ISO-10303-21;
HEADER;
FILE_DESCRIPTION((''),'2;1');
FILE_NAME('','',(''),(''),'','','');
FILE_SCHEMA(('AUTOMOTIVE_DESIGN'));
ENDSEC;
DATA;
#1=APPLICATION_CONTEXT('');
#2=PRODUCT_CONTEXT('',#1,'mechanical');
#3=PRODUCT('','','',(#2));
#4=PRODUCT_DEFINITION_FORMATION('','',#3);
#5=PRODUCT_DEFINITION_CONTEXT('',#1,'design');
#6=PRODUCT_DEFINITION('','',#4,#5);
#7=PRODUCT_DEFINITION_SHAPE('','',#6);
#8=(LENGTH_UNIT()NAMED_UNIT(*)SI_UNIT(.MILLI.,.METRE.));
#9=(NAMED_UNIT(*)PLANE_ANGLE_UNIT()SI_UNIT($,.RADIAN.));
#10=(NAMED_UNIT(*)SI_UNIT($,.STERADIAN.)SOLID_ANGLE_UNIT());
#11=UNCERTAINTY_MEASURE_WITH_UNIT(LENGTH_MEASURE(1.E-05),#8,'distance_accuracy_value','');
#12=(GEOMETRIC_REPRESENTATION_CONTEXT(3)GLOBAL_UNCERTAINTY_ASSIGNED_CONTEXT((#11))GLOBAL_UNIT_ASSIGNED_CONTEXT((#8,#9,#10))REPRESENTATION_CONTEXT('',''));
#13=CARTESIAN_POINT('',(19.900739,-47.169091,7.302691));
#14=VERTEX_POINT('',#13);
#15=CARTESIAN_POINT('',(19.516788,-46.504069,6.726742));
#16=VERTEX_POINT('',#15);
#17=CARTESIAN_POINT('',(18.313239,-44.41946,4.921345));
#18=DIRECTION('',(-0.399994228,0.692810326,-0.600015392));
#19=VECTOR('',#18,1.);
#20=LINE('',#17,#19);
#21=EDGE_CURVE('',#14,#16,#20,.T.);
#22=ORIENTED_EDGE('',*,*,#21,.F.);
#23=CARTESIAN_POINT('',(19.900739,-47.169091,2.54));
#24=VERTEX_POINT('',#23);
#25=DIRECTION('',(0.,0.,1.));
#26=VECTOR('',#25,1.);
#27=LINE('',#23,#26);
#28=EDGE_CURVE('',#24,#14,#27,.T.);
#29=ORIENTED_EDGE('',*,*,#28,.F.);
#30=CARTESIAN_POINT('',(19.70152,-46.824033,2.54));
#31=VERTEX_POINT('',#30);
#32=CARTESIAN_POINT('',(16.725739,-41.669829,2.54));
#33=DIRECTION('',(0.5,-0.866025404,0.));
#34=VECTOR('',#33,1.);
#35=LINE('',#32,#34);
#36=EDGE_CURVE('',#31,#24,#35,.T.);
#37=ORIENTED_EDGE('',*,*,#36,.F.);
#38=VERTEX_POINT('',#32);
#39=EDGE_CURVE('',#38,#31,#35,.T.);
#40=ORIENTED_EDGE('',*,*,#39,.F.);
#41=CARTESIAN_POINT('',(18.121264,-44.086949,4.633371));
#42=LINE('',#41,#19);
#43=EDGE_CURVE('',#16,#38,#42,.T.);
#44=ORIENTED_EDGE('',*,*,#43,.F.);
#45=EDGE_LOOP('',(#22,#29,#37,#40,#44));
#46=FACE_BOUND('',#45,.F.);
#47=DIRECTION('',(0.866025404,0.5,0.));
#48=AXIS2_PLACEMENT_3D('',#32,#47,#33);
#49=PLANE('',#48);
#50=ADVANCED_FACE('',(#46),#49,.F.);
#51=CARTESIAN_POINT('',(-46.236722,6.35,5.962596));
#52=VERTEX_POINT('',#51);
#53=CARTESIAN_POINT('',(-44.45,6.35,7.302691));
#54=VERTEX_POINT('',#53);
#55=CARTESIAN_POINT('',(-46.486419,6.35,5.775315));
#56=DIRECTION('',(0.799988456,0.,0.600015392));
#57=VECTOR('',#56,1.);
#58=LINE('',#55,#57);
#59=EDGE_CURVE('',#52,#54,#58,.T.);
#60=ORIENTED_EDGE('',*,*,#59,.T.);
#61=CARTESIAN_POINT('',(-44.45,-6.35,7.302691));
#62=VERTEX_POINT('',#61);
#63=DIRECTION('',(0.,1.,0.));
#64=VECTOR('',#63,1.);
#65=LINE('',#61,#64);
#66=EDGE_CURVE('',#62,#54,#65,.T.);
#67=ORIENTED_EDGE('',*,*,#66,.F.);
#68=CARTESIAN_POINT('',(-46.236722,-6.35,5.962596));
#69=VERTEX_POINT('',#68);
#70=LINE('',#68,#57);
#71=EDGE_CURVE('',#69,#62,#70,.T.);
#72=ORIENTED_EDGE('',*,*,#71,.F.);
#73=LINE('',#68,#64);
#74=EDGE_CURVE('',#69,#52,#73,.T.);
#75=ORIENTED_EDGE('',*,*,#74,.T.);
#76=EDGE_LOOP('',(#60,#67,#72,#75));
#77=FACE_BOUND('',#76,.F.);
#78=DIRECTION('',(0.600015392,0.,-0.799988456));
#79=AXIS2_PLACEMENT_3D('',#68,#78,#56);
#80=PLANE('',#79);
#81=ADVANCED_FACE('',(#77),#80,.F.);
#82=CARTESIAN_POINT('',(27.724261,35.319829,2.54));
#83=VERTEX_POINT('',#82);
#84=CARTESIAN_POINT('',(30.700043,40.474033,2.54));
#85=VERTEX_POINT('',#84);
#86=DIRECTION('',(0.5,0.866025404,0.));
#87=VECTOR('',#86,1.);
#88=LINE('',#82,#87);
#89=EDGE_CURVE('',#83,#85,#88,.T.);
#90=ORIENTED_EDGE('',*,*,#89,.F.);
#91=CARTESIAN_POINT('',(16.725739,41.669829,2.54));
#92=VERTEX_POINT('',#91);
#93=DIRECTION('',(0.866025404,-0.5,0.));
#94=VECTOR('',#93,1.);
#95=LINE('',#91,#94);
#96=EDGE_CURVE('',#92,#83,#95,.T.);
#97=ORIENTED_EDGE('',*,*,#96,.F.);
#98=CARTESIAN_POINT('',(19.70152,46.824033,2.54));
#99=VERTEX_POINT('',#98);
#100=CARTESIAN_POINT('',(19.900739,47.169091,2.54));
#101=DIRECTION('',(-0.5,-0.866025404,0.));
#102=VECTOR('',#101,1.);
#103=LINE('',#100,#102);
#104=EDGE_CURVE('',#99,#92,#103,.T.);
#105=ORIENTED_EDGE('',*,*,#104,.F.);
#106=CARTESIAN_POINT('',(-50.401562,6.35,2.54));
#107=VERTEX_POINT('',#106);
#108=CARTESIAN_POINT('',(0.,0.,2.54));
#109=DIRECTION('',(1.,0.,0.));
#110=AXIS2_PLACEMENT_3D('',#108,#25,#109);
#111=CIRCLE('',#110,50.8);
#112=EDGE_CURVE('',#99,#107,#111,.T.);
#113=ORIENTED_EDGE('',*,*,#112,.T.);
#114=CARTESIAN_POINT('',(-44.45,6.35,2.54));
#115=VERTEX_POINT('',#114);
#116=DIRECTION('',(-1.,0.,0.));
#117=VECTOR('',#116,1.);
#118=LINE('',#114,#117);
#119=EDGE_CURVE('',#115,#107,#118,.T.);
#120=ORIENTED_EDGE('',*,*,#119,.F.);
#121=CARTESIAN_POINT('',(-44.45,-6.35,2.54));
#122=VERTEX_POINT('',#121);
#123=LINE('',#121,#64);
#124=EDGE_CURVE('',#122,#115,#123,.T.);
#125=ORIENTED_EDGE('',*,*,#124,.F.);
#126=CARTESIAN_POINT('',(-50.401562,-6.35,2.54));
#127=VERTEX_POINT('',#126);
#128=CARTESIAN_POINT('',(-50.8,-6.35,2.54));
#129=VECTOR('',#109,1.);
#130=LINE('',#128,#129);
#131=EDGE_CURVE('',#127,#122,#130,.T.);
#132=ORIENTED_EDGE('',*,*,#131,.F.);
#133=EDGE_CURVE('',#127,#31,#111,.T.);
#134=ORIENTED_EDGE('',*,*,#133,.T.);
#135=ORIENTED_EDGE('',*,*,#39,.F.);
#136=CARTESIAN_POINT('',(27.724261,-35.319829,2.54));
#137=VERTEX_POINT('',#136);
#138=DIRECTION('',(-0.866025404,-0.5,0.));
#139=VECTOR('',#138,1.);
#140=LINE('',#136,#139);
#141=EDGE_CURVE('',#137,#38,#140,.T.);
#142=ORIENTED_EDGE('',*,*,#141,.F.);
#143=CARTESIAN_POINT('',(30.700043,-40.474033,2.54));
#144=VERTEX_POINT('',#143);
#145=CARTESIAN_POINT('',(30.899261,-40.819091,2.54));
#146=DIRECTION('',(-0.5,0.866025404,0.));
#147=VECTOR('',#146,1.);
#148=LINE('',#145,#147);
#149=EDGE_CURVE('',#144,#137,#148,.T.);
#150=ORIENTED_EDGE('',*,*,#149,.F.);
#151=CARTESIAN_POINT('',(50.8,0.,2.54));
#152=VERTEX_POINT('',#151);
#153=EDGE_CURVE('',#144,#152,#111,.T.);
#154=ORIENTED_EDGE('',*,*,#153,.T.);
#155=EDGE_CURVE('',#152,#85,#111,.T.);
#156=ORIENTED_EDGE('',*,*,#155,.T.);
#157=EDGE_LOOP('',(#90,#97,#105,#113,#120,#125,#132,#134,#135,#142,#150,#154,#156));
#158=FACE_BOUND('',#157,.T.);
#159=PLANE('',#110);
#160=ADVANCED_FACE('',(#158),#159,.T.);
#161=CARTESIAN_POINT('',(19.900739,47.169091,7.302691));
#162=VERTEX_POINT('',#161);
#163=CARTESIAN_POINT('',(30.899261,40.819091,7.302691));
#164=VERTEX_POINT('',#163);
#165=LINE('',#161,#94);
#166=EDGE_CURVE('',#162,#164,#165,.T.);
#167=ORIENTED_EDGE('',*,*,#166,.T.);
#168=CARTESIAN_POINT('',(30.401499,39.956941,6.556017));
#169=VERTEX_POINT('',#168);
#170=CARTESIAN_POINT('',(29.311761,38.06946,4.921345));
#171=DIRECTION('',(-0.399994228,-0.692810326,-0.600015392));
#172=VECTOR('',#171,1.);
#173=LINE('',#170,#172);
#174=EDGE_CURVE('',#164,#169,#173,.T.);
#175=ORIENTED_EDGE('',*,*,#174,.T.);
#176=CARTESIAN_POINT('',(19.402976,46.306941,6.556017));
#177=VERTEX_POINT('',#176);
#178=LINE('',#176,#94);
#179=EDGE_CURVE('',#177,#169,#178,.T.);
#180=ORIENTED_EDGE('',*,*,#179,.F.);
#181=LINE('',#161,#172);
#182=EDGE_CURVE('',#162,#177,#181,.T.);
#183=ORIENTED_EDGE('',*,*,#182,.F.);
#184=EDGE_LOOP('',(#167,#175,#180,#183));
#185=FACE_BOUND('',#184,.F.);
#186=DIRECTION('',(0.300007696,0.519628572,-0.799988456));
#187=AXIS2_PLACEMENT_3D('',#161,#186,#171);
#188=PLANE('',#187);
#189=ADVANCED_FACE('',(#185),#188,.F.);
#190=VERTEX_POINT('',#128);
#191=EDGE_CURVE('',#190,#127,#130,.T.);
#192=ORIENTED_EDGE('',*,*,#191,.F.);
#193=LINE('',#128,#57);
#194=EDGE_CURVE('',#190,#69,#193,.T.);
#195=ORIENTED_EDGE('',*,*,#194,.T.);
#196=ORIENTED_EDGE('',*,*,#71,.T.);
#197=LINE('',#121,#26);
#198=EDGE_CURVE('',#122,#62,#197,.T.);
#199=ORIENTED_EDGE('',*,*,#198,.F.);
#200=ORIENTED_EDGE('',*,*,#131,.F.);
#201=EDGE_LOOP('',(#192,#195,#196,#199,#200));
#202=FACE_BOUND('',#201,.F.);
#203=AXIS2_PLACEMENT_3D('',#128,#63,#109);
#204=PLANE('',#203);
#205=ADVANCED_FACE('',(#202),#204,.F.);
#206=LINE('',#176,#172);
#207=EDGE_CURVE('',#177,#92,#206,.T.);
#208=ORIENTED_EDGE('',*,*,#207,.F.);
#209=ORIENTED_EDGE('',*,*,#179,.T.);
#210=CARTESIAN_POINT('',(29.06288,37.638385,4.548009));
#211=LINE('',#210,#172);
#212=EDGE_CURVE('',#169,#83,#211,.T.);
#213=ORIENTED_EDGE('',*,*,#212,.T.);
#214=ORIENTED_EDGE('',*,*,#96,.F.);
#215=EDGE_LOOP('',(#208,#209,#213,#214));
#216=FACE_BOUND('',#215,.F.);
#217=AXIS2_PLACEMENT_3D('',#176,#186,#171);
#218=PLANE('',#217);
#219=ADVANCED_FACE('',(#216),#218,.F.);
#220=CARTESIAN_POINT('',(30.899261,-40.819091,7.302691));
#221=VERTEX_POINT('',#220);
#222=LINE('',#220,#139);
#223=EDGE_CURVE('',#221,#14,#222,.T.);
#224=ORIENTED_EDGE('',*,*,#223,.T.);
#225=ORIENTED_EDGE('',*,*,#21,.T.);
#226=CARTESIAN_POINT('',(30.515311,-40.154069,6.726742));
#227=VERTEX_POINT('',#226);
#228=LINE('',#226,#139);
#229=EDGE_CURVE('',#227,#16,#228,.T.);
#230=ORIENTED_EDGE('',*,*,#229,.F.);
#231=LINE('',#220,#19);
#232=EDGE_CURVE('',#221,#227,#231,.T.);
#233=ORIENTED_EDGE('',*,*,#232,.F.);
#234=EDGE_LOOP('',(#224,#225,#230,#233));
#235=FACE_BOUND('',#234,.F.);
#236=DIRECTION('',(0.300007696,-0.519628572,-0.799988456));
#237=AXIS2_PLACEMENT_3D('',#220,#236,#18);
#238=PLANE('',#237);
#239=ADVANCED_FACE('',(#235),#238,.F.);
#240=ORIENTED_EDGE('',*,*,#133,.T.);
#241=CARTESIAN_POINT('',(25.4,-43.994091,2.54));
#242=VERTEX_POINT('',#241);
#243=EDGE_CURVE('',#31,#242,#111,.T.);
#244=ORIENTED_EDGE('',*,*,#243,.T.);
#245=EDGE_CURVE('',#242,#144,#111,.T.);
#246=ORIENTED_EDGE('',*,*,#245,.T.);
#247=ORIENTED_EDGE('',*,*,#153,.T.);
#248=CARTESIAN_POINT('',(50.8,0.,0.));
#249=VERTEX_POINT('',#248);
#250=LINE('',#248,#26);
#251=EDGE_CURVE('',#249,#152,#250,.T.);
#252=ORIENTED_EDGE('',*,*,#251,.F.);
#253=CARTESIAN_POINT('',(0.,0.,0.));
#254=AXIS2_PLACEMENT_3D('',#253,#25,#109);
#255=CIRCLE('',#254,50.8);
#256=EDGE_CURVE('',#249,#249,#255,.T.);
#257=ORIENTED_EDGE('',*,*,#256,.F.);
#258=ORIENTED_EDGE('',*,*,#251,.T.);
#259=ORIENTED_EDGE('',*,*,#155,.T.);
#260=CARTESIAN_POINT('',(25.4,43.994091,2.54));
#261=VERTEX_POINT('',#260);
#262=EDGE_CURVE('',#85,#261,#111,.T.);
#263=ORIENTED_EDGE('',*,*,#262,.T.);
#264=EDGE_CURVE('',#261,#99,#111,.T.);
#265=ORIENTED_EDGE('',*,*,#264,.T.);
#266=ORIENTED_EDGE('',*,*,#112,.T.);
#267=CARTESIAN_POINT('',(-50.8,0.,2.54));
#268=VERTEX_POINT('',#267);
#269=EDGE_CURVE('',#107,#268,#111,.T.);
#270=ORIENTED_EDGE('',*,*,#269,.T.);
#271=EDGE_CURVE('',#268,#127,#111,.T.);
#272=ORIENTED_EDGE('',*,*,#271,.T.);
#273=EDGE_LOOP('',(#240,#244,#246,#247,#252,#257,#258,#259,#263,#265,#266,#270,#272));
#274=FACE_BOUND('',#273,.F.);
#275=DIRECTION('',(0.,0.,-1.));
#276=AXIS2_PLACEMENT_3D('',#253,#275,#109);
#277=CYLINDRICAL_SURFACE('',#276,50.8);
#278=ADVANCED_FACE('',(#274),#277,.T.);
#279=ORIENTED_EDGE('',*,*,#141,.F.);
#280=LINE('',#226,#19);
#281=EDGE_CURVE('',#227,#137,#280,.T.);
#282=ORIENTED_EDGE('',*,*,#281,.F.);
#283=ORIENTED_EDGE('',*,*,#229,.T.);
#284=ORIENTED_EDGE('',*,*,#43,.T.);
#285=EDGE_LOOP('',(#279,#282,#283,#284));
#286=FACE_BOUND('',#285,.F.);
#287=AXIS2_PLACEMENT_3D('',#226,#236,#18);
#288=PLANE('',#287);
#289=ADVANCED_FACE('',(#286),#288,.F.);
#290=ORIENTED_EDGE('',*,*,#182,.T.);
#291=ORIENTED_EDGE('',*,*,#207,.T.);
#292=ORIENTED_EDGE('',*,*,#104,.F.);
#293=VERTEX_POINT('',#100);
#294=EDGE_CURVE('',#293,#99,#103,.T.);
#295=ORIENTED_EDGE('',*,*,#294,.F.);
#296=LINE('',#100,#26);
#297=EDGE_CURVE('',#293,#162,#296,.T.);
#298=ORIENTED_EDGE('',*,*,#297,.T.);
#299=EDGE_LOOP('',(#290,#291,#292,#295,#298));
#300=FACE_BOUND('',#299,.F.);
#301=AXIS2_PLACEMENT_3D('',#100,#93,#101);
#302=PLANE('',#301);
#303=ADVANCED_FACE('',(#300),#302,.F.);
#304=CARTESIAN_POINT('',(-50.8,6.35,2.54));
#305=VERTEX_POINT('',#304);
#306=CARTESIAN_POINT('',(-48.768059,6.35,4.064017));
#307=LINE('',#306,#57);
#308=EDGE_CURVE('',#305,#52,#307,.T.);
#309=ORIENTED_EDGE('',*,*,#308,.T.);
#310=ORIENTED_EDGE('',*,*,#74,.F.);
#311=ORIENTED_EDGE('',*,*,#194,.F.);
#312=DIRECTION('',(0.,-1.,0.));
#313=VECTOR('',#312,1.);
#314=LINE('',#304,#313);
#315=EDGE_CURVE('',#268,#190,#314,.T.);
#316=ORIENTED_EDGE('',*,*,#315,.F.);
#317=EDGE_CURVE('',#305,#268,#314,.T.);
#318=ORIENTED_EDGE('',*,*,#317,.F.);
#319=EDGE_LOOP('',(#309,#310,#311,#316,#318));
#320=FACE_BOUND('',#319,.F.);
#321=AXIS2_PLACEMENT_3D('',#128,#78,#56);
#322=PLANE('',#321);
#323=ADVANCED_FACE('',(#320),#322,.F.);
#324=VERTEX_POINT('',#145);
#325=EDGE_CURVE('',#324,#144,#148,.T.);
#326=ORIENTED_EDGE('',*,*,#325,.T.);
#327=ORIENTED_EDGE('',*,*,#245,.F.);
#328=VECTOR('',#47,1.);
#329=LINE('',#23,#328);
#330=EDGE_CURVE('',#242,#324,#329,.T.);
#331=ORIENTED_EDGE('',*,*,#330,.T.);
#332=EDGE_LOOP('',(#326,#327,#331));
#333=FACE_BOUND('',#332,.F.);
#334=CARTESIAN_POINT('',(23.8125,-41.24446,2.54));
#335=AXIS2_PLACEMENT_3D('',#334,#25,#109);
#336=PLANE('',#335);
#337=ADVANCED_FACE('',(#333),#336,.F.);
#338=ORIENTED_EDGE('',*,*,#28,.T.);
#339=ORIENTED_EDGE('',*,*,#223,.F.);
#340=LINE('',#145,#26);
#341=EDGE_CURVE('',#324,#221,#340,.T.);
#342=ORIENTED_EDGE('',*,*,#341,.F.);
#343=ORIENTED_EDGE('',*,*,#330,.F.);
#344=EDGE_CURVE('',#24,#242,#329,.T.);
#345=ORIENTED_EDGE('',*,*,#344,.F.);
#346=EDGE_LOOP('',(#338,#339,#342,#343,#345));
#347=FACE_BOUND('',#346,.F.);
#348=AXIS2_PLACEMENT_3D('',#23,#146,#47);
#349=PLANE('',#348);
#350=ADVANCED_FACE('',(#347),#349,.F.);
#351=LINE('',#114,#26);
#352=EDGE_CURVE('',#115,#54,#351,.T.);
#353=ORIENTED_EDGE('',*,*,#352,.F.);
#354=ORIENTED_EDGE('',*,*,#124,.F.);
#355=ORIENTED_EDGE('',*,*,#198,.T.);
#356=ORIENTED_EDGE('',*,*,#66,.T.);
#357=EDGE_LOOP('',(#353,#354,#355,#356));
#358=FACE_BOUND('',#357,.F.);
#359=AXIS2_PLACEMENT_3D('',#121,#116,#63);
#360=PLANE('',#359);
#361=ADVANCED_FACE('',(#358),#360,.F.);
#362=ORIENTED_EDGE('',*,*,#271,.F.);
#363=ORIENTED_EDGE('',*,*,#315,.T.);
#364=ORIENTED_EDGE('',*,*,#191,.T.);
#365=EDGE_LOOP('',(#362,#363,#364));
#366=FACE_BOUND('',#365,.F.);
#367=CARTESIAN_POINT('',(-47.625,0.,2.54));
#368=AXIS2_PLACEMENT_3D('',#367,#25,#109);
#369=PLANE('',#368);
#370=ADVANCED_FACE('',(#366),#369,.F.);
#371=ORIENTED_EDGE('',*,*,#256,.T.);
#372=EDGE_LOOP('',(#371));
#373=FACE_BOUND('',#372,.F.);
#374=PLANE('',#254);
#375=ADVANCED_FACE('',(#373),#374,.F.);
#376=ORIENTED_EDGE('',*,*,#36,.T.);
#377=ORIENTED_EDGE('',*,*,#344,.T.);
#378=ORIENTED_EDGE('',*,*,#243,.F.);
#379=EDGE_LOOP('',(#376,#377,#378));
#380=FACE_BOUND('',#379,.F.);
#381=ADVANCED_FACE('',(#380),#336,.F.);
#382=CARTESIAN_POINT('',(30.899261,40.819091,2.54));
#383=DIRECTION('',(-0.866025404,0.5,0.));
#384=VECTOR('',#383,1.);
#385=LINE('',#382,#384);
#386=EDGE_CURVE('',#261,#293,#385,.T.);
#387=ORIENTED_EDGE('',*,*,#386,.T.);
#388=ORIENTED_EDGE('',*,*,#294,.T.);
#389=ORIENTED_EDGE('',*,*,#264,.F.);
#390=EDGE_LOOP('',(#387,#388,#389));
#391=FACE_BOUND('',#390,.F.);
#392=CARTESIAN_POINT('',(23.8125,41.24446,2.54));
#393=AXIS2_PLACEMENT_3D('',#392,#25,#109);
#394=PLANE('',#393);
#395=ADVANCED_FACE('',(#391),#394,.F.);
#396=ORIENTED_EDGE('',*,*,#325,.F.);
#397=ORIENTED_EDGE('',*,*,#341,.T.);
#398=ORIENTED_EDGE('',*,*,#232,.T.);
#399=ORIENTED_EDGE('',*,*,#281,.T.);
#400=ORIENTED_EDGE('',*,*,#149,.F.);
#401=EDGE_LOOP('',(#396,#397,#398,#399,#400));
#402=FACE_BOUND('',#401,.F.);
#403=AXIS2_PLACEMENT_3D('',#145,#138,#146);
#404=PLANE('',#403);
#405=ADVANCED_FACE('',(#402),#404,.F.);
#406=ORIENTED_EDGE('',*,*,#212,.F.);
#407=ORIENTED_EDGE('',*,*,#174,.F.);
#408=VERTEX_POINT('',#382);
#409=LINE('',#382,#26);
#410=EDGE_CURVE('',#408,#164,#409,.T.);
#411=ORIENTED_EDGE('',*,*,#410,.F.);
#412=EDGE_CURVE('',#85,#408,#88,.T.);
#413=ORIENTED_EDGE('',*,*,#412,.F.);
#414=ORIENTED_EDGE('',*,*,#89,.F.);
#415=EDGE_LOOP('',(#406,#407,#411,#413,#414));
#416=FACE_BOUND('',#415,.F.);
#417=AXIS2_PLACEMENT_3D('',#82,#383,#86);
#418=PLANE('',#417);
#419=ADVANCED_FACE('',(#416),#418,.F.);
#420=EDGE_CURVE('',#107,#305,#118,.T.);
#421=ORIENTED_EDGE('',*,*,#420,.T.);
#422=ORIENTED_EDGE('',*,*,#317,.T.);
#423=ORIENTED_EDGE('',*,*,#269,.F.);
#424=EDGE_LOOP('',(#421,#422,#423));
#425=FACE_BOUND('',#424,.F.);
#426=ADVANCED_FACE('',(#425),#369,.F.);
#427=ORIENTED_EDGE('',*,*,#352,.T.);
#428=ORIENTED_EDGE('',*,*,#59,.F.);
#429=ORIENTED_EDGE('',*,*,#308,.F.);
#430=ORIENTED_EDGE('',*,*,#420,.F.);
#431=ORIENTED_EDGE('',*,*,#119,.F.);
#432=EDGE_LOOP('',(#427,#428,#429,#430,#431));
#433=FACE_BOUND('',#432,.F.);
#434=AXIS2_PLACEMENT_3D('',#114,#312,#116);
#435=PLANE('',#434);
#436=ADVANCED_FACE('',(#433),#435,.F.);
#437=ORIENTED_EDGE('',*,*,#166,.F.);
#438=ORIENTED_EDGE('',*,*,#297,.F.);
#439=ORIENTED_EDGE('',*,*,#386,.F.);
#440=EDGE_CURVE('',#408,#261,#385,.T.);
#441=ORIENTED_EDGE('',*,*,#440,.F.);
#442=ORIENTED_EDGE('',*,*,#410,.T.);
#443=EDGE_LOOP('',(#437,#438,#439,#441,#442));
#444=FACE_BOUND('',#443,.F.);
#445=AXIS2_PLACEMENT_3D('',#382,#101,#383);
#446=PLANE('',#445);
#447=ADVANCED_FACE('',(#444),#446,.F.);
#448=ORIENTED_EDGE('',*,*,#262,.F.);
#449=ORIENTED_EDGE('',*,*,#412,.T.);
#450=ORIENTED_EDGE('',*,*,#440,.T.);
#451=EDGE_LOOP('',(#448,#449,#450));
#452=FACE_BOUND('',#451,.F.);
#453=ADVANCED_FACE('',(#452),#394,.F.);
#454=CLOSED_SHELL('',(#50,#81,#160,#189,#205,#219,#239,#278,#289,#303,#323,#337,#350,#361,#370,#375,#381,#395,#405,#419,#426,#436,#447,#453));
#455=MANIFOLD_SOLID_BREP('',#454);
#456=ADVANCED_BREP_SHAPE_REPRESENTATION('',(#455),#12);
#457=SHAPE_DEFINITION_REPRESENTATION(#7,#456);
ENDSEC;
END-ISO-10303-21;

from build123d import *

# Parameters (mm, degrees)
F0_R     = 50.8
F1_DEPTH = 2.54
F3_DEPTH = 12.7
F5_DEPTH = 25.4
F7_DEPTH = 25.4
F9_DEPTH = 25.4


# Not quite as in the source:
# - a feature names something its author has since deleted; it is built from what else it names


with BuildPart() as f1:
    # F0 (on Top) → F1 (new body)
    with BuildSketch(Plane.XY):
        Circle(F0_R)
    extrude(amount=F1_DEPTH)

    # F2 (on face) → F3 (join)
    with BuildSketch(Plane.XY.offset(2.54)):
        Polygon((-50.8, 6.35), (-50.8, 0), (-50.8, -6.35), (-44.45, -6.35), (-44.45, 6.35), align=None)
        Polygon((16.725738686, -41.6698291982), (19.900738686, -47.1690905122), (30.899261314, -40.8190905122), (27.724261314, -35.3198291982), align=None)
        Polygon((27.724261314, 35.3198291982), (30.899261314, 40.8190905122), (19.900738686, 47.1690905122), (16.725738686, 41.6698291982), align=None)
    extrude(amount=F3_DEPTH)

    # F4 (on face) → F5 (cut)
    with BuildSketch(Plane.XZ.offset(6.35)):
        Polygon((-50.8, 15.24), (-50.8, 2.54), (-46.2367217033, 5.962595906), (-44.45, 7.3026908967), (-44.45, 15.24), align=None)
    extrude(amount=-F5_DEPTH, mode=Mode.SUBTRACT)

    # F6 (on face) → F7 (cut)
    with BuildSketch(Plane(origin=(5.499261314, 3.175, 0), x_dir=(-0.5, 0.8660254038, 0), z_dir=(0.8660254038, 0.5, 0))):
        Polygon((-50.0320994455, 6.7267423959), (-44.45, 2.54), (-44.45, 15.24), (-50.8, 15.24), (-50.8, 7.3026908967), align=None)
    extrude(amount=-F7_DEPTH, mode=Mode.SUBTRACT)

    # F8 (on face) → F9 (cut)
    with BuildSketch(Plane(origin=(-5.499261314, 3.175, 0), x_dir=(-0.5, -0.8660254038, 0), z_dir=(-0.8660254038, 0.5, 0))):
        Polygon((-50.8, 15.24), (-50.8, 7.3026908967), (-49.8044750842, 6.556017282), (-44.45, 2.54), (-44.45, 15.24), align=None)
    extrude(amount=-F9_DEPTH, mode=Mode.SUBTRACT)


solid = f1.part
